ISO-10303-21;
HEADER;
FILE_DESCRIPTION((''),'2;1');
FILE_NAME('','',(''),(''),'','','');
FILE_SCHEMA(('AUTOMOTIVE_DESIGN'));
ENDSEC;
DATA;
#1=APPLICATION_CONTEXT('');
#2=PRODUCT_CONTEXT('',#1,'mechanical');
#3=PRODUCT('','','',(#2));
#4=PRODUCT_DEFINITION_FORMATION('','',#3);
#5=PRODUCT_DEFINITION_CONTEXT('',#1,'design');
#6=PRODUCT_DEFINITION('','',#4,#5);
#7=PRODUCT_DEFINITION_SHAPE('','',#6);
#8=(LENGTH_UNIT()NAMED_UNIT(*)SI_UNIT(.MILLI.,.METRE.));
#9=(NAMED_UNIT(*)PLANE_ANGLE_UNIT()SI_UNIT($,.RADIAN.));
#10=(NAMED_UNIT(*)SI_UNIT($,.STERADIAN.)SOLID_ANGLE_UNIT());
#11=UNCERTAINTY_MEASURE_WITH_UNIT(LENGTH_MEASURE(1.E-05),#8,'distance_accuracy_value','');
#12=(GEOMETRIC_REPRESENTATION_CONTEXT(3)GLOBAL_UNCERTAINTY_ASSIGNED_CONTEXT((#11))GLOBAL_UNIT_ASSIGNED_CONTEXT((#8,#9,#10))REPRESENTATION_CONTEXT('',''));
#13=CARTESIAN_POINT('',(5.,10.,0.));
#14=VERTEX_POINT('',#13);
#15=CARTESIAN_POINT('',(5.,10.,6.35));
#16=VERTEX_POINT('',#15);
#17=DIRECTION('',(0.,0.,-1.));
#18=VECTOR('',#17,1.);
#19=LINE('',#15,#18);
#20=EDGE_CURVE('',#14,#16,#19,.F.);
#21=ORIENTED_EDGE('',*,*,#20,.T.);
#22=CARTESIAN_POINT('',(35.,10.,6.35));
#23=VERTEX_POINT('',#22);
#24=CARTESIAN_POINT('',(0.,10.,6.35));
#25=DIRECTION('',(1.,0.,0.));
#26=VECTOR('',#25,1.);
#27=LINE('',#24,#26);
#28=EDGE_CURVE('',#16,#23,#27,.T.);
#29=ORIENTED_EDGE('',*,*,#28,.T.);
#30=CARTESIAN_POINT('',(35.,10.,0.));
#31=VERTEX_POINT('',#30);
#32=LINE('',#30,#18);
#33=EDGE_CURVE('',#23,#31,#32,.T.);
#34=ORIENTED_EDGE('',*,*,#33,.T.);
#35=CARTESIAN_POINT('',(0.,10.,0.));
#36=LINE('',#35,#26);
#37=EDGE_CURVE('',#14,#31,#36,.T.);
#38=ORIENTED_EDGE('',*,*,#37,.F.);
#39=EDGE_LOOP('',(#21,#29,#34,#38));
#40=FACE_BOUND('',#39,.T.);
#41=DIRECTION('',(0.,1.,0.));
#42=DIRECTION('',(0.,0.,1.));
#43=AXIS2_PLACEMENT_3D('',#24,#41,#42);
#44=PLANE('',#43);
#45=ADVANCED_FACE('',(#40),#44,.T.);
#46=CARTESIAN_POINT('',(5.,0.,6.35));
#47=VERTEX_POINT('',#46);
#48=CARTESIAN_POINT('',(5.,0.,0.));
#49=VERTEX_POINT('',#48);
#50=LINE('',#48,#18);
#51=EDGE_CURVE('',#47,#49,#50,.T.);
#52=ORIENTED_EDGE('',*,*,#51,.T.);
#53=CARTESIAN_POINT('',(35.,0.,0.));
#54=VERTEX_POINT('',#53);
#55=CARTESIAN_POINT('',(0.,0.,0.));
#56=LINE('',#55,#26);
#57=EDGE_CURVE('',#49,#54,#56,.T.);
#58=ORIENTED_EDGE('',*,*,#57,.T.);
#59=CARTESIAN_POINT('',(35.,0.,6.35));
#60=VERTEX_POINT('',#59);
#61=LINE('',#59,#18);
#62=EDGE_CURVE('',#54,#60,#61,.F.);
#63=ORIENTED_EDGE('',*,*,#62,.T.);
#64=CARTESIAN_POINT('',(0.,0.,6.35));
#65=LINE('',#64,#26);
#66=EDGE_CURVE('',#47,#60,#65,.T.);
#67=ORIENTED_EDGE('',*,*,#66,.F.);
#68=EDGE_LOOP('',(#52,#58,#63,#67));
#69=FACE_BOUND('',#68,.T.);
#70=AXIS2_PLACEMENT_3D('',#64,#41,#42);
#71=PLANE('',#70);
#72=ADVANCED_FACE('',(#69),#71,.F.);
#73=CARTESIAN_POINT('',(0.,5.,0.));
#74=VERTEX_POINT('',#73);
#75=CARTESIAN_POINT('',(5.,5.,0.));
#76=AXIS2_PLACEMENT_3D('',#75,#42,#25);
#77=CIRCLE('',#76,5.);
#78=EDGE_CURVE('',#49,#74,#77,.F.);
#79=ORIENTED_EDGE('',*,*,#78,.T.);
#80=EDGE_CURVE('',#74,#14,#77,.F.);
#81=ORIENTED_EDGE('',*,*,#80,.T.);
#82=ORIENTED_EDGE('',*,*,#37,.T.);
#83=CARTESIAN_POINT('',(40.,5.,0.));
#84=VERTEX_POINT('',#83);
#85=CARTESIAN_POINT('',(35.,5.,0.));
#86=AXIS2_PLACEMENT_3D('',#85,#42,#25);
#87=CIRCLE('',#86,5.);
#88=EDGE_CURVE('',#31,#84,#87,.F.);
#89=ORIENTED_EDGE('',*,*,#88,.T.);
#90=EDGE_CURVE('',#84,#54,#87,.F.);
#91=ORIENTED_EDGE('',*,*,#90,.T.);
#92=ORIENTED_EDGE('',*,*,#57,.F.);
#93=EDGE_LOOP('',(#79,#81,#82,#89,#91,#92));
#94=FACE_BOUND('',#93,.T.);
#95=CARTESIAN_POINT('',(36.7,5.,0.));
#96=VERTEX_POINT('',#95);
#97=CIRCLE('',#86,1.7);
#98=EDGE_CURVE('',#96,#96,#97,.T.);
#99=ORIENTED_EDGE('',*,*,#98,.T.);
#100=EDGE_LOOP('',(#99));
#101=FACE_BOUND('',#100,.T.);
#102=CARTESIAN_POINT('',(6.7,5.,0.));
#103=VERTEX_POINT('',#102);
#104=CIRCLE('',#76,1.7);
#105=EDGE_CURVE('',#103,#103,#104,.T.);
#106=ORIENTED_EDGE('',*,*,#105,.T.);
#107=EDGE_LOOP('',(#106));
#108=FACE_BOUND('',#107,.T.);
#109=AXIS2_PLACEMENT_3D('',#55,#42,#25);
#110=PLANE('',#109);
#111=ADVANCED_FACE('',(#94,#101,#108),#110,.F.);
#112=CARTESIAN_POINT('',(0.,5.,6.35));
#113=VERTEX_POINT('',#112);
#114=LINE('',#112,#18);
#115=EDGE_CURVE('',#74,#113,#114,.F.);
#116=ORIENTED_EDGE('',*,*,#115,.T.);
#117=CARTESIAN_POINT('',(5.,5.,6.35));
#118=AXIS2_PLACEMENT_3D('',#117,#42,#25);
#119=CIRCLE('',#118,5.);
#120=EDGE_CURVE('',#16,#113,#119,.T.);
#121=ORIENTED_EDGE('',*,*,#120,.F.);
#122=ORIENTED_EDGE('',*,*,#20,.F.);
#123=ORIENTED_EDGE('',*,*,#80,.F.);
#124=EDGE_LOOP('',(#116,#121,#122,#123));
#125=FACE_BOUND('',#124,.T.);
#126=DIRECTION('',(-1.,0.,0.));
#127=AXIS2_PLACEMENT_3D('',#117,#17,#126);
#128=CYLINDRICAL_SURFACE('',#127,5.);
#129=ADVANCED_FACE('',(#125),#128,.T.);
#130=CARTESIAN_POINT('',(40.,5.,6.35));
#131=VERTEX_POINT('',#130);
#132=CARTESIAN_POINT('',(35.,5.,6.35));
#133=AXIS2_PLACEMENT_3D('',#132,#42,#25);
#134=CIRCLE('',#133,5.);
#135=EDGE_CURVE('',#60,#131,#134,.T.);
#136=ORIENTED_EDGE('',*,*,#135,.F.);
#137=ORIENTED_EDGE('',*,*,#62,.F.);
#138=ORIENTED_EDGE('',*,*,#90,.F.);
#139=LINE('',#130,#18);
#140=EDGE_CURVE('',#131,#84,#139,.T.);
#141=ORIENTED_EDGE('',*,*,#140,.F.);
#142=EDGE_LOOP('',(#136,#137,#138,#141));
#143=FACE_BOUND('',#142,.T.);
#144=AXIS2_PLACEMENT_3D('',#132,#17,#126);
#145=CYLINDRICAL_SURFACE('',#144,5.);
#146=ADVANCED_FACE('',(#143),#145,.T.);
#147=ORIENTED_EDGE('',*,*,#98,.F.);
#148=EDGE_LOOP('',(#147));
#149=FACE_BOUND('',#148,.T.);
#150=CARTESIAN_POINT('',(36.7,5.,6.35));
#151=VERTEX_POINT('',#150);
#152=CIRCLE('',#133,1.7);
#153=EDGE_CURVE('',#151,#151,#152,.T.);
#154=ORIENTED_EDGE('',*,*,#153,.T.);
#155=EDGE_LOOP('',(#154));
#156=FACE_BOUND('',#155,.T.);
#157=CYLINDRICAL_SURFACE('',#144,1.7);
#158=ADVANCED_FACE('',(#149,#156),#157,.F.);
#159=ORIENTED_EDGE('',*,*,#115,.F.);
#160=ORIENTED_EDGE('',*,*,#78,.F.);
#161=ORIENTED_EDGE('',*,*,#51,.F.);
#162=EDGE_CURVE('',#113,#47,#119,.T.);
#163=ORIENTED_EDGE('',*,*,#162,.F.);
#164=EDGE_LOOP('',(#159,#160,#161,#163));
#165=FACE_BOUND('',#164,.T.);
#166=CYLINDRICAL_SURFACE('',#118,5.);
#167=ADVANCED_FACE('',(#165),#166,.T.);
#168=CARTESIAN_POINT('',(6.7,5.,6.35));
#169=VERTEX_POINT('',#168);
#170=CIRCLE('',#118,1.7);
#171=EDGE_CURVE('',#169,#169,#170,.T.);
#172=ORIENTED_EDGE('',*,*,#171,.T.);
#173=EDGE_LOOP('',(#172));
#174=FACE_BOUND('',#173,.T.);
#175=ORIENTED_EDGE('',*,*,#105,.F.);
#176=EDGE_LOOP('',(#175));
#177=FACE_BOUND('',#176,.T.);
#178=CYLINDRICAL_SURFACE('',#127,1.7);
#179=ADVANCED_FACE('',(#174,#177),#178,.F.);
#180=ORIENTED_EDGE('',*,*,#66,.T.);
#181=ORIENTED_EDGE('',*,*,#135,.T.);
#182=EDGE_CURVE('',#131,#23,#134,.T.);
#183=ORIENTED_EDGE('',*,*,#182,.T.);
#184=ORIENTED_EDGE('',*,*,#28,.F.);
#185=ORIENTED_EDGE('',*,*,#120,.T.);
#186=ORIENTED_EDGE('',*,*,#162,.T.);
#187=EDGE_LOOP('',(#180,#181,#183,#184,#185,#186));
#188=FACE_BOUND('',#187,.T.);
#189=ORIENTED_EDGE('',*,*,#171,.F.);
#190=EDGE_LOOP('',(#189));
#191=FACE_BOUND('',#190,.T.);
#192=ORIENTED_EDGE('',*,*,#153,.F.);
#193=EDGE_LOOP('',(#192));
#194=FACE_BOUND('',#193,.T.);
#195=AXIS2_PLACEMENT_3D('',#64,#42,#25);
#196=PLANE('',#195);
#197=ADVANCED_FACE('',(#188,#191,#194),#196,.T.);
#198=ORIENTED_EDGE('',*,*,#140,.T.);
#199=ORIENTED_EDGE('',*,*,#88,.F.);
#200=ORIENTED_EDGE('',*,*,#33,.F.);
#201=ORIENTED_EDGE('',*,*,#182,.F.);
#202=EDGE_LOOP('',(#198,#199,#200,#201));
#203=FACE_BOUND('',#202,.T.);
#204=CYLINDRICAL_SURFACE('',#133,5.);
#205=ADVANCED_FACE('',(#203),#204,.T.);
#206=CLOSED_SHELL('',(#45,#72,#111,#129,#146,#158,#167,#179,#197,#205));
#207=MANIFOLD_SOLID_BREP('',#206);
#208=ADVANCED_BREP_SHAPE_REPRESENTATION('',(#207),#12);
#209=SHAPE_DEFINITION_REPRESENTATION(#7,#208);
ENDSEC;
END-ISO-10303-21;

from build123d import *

# Parameters (mm, degrees)
SKETCH1_W           = 40
SKETCH1_H           = 10
SKETCH1_R           = 1.7
BOSS_EXTRUDE1_DEPTH = 6.35
FILLET1_R           = 5


with BuildPart() as part:
    # Sketch1 → Boss-Extrude1 (new body)
    with BuildSketch(Plane.XY):
        with Locations((20, 5)):
            Rectangle(SKETCH1_W, SKETCH1_H)
        with Locations((35, 5)):
            Circle(SKETCH1_R, mode=Mode.SUBTRACT)
        with Locations((5, 5)):
            Circle(SKETCH1_R, mode=Mode.SUBTRACT)
    extrude(amount=BOSS_EXTRUDE1_DEPTH)

    # Fillet1
    fillet1_edges = [part.edges().sort_by_distance(p)[0] for p in [
        (0, 10, 3.175),
        (0, 0, 3.175),
        (40, 10, 3.175),
        (40, 0, 3.175),
    ]]
    fillet(fillet1_edges, radius=FILLET1_R - 0.0001)  # a hair under: the kernel refuses the full size


solid = part.part
